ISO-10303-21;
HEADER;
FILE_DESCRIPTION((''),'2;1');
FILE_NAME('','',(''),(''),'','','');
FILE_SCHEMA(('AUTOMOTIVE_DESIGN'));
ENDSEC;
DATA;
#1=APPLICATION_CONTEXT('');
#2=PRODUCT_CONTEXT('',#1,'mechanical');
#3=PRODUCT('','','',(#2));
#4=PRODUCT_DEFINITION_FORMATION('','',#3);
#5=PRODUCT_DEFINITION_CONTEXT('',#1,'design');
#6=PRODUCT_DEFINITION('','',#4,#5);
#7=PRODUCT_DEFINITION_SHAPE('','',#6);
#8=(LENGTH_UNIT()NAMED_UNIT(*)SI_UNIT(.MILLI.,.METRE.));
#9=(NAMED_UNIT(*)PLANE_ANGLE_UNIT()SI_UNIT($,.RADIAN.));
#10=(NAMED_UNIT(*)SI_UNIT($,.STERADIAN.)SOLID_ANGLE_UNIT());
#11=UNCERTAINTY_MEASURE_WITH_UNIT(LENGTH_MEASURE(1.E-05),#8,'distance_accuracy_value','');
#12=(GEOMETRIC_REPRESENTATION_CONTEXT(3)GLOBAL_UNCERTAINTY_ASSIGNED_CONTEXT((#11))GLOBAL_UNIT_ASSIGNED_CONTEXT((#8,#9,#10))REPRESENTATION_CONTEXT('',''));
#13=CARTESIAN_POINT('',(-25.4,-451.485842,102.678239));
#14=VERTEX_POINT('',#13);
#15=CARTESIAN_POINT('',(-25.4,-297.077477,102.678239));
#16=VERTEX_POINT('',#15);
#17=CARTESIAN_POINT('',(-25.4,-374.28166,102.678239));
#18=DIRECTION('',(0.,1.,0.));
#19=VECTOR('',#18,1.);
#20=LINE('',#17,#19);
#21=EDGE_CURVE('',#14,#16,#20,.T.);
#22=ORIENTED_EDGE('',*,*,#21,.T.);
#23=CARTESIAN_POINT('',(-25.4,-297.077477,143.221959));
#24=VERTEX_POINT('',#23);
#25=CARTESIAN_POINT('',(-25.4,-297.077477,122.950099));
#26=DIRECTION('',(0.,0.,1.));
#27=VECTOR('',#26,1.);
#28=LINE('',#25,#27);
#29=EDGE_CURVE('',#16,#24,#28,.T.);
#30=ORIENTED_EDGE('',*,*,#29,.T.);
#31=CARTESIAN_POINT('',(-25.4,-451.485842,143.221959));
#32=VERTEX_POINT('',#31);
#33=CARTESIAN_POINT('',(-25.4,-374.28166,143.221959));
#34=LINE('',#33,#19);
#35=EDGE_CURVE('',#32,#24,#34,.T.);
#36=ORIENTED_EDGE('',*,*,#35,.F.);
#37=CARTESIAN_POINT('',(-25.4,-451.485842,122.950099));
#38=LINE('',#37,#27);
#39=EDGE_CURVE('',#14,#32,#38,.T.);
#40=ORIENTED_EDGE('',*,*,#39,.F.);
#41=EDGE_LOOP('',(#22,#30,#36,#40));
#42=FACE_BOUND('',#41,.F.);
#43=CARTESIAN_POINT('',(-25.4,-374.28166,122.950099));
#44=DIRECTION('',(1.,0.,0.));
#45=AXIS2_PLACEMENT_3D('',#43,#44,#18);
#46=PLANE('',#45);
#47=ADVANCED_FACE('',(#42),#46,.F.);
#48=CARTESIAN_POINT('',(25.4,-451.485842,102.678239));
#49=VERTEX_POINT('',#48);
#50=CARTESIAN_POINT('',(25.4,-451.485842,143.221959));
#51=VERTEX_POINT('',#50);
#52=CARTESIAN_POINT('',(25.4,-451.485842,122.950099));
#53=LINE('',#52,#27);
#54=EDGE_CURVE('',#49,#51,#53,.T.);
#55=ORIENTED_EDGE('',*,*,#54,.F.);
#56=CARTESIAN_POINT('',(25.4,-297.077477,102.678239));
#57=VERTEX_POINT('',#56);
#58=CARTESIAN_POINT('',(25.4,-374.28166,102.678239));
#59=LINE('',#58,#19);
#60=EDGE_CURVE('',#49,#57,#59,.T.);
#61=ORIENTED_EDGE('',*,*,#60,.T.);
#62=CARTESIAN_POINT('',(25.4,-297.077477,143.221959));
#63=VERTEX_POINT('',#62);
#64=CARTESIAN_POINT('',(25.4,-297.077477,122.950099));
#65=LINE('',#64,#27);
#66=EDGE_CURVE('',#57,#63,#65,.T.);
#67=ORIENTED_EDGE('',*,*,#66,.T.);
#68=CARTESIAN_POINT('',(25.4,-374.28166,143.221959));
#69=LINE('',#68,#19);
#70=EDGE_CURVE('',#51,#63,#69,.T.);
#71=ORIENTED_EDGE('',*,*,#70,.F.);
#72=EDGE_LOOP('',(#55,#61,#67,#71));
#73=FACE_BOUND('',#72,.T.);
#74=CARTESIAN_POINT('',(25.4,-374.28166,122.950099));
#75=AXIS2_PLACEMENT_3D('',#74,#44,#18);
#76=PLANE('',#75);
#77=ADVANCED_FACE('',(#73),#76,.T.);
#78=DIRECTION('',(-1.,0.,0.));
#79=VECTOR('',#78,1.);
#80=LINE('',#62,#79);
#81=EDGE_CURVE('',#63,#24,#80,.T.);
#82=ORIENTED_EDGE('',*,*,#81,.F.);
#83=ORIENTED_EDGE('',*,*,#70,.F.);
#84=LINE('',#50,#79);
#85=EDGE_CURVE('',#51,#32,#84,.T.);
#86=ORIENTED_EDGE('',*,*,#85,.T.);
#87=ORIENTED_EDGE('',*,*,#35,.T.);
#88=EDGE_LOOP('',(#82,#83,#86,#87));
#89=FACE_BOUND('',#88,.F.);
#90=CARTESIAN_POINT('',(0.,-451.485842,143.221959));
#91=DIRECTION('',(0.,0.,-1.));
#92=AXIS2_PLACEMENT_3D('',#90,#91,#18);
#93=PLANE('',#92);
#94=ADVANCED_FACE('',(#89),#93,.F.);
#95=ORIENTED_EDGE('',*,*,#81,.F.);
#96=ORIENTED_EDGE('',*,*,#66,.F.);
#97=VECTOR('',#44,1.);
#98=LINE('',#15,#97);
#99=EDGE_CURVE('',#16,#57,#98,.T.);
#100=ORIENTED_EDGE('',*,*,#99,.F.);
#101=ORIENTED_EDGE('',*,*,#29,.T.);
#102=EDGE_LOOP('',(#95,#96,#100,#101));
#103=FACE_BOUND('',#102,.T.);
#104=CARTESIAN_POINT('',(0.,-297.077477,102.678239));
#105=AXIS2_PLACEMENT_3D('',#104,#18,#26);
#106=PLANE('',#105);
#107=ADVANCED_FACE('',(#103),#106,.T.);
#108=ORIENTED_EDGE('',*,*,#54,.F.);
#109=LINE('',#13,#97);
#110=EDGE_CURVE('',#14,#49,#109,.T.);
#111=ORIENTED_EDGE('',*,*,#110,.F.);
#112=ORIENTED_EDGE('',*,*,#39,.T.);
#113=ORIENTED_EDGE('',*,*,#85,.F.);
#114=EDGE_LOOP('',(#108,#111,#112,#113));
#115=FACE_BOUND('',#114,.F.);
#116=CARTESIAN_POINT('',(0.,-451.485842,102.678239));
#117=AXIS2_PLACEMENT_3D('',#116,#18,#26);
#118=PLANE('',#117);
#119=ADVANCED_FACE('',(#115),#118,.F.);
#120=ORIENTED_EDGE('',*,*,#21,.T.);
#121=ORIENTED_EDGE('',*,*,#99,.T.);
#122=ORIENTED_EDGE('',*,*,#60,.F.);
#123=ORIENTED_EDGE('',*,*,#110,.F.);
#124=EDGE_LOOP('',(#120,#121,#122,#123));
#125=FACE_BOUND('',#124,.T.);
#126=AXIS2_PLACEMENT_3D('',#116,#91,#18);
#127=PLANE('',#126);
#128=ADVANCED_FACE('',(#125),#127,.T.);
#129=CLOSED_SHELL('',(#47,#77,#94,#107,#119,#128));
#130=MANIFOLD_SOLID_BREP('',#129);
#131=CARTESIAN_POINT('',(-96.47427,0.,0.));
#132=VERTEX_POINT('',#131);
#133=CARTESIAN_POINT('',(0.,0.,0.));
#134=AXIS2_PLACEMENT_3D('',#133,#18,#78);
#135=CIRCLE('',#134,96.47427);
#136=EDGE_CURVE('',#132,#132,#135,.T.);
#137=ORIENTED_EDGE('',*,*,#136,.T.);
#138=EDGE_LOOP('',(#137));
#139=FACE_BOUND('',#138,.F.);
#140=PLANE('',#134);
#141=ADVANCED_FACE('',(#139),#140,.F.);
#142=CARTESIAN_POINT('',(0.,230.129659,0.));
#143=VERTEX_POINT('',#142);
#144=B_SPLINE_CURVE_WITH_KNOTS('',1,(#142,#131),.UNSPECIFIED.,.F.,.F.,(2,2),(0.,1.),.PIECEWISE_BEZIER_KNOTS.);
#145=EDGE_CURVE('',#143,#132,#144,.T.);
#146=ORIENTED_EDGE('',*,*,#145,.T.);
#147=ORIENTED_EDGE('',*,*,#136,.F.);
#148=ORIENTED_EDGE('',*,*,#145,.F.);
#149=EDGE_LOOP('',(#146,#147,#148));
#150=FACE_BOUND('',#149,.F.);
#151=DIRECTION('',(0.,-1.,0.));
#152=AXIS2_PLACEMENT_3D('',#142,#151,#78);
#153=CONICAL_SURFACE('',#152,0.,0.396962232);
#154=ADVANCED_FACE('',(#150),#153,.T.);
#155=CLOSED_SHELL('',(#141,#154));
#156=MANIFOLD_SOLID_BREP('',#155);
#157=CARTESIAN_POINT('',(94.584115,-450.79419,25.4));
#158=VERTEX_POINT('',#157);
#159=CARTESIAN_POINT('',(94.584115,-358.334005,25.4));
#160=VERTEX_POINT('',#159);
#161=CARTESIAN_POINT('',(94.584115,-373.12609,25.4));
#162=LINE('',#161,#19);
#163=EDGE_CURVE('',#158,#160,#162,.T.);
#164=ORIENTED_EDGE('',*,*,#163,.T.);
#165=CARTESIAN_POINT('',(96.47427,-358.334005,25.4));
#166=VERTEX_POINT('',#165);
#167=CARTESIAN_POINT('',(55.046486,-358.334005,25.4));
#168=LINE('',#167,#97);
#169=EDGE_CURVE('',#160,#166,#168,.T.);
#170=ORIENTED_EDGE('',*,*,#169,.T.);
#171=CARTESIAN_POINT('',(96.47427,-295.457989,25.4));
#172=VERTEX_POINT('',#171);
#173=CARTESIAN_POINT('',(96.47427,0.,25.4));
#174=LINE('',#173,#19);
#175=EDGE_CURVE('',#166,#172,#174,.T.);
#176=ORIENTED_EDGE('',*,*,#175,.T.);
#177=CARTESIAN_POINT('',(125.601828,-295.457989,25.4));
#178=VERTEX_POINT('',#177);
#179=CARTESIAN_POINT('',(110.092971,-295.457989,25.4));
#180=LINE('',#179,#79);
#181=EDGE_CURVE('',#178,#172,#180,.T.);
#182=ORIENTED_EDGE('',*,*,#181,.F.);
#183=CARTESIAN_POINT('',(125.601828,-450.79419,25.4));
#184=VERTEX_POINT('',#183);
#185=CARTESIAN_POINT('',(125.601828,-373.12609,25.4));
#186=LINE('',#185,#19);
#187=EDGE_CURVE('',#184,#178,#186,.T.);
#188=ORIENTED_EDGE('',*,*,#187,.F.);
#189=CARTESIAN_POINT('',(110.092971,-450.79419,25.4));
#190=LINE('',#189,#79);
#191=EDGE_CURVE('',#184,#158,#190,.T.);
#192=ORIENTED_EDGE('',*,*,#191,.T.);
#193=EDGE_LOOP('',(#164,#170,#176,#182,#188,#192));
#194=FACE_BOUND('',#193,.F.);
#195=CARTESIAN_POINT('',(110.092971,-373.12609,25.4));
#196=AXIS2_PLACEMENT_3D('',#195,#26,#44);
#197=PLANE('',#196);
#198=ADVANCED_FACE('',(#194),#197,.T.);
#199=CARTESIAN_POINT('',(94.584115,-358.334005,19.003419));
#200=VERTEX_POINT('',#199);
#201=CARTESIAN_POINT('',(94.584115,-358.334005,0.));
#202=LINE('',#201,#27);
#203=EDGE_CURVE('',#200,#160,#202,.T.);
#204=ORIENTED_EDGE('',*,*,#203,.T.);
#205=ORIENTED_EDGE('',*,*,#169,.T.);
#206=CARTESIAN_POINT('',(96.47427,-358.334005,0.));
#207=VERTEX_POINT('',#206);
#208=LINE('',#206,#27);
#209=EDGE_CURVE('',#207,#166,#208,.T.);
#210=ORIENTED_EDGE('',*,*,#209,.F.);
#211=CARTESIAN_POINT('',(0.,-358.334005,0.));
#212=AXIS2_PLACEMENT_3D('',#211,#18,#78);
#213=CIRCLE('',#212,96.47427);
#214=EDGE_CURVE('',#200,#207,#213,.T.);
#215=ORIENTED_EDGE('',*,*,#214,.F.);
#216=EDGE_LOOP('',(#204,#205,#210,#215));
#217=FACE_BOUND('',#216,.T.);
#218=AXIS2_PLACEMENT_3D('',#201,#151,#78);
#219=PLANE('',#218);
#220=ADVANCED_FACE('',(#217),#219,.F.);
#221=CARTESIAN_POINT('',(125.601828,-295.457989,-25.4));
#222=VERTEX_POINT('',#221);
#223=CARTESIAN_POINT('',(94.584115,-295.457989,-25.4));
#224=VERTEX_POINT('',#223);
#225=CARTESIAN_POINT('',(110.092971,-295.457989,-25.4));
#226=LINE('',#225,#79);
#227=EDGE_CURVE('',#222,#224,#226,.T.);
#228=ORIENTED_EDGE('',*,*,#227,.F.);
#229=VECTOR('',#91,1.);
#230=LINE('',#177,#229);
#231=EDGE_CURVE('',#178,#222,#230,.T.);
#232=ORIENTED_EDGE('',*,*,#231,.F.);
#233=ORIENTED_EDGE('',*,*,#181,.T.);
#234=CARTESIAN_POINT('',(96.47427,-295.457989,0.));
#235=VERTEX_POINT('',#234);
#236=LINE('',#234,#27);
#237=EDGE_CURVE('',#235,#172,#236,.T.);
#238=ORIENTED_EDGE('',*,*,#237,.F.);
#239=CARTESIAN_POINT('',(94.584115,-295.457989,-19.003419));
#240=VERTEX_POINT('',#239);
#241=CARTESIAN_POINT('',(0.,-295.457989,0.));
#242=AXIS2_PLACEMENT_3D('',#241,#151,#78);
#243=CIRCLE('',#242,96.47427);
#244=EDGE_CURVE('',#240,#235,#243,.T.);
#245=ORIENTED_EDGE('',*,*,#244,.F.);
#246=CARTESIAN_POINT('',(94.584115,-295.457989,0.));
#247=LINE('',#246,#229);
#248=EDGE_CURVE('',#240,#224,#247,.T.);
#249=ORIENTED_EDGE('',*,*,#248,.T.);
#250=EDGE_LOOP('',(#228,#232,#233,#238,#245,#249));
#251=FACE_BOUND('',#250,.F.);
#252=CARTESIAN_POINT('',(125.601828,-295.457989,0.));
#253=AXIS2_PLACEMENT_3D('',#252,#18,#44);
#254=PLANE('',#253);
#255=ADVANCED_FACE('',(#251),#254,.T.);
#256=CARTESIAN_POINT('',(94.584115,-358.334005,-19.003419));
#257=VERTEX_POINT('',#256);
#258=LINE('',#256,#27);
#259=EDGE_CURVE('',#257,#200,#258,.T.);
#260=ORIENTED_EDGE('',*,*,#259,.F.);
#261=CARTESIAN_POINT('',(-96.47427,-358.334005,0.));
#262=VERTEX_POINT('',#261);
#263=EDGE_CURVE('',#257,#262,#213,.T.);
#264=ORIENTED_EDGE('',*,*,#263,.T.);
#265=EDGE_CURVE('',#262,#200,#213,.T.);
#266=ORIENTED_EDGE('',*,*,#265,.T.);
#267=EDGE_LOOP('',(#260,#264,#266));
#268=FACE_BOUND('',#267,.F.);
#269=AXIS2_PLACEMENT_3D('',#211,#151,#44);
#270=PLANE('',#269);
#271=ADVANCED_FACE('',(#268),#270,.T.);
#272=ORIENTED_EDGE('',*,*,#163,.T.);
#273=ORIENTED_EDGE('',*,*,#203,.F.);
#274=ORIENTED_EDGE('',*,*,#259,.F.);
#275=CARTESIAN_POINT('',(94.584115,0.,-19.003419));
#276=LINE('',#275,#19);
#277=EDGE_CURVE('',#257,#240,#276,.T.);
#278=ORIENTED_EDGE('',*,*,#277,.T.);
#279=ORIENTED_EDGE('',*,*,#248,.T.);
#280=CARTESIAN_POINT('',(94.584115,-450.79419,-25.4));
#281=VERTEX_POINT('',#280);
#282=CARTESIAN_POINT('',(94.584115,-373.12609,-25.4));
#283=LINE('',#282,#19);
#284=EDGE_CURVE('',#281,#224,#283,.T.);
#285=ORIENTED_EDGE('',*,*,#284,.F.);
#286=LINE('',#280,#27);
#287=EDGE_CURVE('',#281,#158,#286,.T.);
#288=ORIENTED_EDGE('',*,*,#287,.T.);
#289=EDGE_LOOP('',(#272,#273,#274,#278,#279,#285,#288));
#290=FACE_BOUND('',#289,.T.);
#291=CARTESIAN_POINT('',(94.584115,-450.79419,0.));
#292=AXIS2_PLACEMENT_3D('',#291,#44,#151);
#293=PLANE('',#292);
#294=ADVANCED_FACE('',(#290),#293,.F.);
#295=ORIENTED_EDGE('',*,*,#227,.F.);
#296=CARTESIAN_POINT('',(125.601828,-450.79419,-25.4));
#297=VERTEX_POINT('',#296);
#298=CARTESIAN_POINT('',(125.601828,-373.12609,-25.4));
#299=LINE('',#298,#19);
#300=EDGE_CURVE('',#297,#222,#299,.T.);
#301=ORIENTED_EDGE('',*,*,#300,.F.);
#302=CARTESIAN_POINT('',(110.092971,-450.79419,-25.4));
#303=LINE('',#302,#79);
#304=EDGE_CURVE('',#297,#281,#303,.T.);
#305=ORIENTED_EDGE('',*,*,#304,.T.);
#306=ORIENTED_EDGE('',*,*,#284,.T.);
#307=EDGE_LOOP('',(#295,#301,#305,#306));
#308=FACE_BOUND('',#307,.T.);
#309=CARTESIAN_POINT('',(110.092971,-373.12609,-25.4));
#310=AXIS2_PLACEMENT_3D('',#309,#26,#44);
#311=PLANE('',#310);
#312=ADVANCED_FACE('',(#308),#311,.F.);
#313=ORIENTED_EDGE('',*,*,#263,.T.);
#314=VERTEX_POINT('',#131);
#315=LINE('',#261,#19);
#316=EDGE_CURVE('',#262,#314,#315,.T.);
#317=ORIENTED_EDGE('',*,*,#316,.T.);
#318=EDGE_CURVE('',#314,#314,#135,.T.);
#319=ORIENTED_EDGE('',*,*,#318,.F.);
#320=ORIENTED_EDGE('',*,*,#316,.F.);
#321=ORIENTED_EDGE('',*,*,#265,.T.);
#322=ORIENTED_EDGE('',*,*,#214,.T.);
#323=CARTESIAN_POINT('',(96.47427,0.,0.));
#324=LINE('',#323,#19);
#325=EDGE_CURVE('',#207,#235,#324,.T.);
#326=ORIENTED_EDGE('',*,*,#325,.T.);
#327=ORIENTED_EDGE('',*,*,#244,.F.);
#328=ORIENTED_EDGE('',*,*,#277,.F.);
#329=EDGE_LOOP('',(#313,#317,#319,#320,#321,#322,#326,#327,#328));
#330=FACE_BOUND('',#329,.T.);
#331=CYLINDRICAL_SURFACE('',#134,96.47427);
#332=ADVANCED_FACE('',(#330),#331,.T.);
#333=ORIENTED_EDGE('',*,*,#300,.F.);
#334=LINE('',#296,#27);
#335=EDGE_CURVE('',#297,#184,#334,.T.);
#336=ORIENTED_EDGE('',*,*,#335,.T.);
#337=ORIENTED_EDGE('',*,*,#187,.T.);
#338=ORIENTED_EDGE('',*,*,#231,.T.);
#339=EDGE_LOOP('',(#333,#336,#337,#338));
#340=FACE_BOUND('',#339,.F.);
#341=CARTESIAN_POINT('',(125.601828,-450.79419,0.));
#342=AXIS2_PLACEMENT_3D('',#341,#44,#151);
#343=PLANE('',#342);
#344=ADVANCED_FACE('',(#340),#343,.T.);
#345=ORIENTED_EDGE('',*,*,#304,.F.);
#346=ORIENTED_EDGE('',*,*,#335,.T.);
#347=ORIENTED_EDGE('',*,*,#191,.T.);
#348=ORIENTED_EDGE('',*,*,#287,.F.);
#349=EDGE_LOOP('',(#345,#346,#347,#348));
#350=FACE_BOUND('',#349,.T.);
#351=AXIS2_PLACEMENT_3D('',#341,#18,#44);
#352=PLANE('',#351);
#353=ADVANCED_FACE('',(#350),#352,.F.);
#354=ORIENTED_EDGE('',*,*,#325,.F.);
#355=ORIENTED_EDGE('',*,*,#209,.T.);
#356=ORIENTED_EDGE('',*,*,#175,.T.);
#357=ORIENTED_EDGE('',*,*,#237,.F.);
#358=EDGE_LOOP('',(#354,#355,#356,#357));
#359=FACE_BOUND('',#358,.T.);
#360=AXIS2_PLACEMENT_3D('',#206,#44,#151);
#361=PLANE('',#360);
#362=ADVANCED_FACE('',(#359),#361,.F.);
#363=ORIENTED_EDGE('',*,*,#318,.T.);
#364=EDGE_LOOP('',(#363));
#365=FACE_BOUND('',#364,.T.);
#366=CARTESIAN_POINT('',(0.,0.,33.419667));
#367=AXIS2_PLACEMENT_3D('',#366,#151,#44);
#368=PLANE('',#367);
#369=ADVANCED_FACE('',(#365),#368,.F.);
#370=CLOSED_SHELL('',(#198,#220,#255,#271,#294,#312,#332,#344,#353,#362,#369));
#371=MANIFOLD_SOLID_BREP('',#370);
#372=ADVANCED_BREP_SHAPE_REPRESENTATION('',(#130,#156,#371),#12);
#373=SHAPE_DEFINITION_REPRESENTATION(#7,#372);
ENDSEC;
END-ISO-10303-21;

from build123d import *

# Parameters (mm, degrees)
F4_DEPTH  = 356.7984104156
F0_R      = 96.474269749
F5_DEPTH  = 358.334004879
F7_W      = 31.0177132487
F7_H      = 155.3362011909
F9_DEPTH  = 25.4
F10_DEPTH = 25.4
F8_W      = 155.1911532879
F8_H      = 39.4811406732
F11_DEPTH = 25.4
F12_DEPTH = 25.4
F7_W_2    = 35.9391272068
F7_H_2    = 158.800393343
F13_DEPTH = 25.4
F14_DEPTH = 25.4
F15_DEPTH = 25.4
F8_W_2    = 154.4083654881
F8_H_2    = 40.5437201262
F16_DEPTH = 25.4
F17_DEPTH = 25.4
F5_FACE_R = 96.474269749


with BuildPart() as f4:
    # F3 (on face) → F4 (new body)
    with BuildSketch(Plane.XZ):
        with BuildLine():
            ThreePointArc((96.474269749, 0), (0, 96.474269749), (-96.474269749, 0))
            Line((-96.474269749, 0), (0, 0))
            Line((0, 0), (96.474269749, 0))
        make_face()
    extrude(amount=F4_DEPTH)

    # F0 (on Front) → F5 (join)
    with BuildSketch(Plane.XZ):
        Circle(F0_R)
    extrude(amount=F5_DEPTH)

    # F7 (on Top) → F9 (join)
    with BuildSketch(Plane.XY):
        with Locations((-110.0929714739, -373.1260895729)):
            Rectangle(F7_W, F7_H)
    extrude(amount=-F9_DEPTH)

    # F10 (add): a face of the model
    f10_faces = [f4.faces().sort_by_distance(p)[0] for p in [
        (-110.4612875771, -374.2952426729, 0),
    ]]
    extrude(f10_faces, amount=F10_DEPTH)


with BuildPart() as f11:
    # F8 (on Right) → F11 (new body)
    with BuildSketch(Plane.YZ):
        with Locations((-374.6730536222, -119.7640411556)):
            Rectangle(F8_W, F8_H)
    extrude(amount=-F11_DEPTH)

    # F12 (add): a face of the model
    f12_faces = [f11.faces().sort_by_distance(p)[0] for p in [
        (0, -374.6730536222, -119.7640411556),
    ]]
    extrude(f12_faces, amount=F12_DEPTH)


with BuildPart() as f13:
    # F7 (on Top) → F13 (new body)
    with BuildSketch(Plane.XY):
        with Locations((116.1221414804, -374.288007617)):
            Rectangle(F7_W_2, F7_H_2)
    extrude(amount=F13_DEPTH)

    # F7 (on Top) → F14 (join)
    with BuildSketch(Plane.XY):
        with Locations((116.1221414804, -374.288007617)):
            Rectangle(F7_W_2, F7_H_2)
    extrude(amount=F14_DEPTH)

    # F7 (on Top) → F15 (join)
    with BuildSketch(Plane.XY):
        with Locations((116.1221414804, -374.288007617)):
            Rectangle(F7_W_2, F7_H_2)
    extrude(amount=-F15_DEPTH)


with BuildPart() as f16:
    # F8 (on Right) → F16 (new body)
    with BuildSketch(Plane.YZ):
        with Locations((-374.2816597223, 122.9500994086)):
            Rectangle(F8_W_2, F8_H_2)
    extrude(amount=F16_DEPTH)

    # F8 (on Right) → F17 (join)
    with BuildSketch(Plane.YZ):
        with Locations((-374.2816597223, 122.9500994086)):
            Rectangle(F8_W_2, F8_H_2)
    extrude(amount=-F17_DEPTH)


with BuildPart() as f19:
    # F5_face (on face) → F19 section 0
    with BuildSketch(Plane(origin=(0, 0, 0), x_dir=(-1, 0, 0), z_dir=(0, 1, 0)), mode=Mode.PRIVATE) as f19_s0:
        Circle(F5_FACE_R)
    loft([Vertex(0, 230.1296591759, 0), f19_s0.sketch])


with BuildPart() as f20_1:
    # F20: instance of F4
    add(f4.part.mirror(Plane.YZ))


solid = Compound([f16.part, f19.part, f20_1.part])
